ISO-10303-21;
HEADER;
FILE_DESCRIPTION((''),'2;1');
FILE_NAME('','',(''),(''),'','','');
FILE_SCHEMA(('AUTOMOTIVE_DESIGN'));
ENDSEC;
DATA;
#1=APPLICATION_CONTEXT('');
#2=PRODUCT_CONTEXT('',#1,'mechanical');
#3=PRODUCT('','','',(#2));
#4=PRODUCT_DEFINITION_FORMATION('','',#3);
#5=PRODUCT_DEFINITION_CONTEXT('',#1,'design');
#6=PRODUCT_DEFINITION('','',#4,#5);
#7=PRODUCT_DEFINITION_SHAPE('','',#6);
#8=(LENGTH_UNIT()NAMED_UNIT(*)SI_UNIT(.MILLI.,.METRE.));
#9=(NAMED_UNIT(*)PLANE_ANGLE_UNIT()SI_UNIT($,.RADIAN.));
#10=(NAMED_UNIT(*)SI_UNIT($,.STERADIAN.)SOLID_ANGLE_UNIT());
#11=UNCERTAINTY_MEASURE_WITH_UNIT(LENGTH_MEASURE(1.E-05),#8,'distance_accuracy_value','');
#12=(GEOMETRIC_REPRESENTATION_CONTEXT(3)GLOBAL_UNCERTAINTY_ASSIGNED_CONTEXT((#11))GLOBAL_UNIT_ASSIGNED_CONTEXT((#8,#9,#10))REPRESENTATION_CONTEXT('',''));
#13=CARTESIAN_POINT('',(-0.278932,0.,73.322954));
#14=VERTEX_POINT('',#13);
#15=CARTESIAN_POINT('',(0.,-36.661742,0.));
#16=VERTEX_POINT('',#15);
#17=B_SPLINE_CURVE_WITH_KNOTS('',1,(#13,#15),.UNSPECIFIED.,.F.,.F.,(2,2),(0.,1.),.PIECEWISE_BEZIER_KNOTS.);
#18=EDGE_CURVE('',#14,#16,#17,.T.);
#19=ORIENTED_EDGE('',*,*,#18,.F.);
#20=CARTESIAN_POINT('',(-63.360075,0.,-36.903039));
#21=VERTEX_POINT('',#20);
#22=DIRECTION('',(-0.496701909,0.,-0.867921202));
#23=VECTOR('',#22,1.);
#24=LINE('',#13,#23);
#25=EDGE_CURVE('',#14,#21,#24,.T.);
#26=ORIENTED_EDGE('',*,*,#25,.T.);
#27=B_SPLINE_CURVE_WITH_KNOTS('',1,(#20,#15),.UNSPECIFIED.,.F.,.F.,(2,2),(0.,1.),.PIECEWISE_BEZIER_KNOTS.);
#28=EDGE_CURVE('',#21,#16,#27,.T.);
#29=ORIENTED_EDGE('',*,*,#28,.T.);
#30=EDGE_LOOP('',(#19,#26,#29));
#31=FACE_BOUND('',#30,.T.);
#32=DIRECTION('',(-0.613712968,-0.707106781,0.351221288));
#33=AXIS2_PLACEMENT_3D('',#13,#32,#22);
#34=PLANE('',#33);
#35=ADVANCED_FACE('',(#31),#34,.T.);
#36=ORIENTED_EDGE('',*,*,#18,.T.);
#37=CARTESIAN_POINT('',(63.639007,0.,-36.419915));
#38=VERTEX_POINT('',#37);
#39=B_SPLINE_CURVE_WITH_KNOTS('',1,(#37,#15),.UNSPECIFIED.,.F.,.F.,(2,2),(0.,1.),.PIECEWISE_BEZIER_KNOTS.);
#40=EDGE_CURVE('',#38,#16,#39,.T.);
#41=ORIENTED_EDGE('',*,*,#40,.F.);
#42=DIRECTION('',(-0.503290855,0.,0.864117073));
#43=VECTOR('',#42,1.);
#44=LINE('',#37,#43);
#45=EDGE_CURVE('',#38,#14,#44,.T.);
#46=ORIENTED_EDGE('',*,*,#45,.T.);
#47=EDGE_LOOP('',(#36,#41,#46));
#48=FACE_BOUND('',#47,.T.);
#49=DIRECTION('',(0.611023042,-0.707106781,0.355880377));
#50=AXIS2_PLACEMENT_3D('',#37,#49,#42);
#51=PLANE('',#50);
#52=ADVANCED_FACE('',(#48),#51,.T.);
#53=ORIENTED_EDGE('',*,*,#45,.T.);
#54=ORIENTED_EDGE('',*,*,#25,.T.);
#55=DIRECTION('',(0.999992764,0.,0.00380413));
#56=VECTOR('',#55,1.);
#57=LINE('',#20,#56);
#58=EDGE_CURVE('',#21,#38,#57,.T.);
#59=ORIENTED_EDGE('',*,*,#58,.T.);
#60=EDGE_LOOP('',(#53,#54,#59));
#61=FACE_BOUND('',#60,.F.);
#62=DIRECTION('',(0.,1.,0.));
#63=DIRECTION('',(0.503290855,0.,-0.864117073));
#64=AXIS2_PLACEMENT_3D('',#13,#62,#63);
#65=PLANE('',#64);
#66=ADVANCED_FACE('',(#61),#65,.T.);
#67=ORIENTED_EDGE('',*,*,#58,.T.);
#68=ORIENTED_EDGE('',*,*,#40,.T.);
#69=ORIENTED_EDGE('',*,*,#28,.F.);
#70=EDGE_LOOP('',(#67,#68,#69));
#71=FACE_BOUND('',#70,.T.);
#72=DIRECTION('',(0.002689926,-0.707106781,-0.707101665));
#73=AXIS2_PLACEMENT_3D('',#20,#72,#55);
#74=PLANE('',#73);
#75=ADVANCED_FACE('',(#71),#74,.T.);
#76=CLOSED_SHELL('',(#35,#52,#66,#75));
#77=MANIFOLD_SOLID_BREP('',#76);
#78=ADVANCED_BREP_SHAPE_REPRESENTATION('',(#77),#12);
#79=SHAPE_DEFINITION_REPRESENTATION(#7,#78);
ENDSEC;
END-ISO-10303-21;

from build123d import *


# Not quite as in the source:
# - an extrude whose draft closes it to a point is written as a loft to that point


with BuildPart() as f1:
    # F0 (on Front) → F1 section 0
    with BuildSketch(Plane.XZ, mode=Mode.PRIVATE) as f1_s0:
        Polygon((-0.2789320431, 73.3229536383), (-63.3600745098, -36.9030390544), (63.6390065529, -36.4199145839), align=None)
    loft([f1_s0.sketch, Vertex(0, -36.6617420935, 0)], ruled=True)


solid = f1.part
